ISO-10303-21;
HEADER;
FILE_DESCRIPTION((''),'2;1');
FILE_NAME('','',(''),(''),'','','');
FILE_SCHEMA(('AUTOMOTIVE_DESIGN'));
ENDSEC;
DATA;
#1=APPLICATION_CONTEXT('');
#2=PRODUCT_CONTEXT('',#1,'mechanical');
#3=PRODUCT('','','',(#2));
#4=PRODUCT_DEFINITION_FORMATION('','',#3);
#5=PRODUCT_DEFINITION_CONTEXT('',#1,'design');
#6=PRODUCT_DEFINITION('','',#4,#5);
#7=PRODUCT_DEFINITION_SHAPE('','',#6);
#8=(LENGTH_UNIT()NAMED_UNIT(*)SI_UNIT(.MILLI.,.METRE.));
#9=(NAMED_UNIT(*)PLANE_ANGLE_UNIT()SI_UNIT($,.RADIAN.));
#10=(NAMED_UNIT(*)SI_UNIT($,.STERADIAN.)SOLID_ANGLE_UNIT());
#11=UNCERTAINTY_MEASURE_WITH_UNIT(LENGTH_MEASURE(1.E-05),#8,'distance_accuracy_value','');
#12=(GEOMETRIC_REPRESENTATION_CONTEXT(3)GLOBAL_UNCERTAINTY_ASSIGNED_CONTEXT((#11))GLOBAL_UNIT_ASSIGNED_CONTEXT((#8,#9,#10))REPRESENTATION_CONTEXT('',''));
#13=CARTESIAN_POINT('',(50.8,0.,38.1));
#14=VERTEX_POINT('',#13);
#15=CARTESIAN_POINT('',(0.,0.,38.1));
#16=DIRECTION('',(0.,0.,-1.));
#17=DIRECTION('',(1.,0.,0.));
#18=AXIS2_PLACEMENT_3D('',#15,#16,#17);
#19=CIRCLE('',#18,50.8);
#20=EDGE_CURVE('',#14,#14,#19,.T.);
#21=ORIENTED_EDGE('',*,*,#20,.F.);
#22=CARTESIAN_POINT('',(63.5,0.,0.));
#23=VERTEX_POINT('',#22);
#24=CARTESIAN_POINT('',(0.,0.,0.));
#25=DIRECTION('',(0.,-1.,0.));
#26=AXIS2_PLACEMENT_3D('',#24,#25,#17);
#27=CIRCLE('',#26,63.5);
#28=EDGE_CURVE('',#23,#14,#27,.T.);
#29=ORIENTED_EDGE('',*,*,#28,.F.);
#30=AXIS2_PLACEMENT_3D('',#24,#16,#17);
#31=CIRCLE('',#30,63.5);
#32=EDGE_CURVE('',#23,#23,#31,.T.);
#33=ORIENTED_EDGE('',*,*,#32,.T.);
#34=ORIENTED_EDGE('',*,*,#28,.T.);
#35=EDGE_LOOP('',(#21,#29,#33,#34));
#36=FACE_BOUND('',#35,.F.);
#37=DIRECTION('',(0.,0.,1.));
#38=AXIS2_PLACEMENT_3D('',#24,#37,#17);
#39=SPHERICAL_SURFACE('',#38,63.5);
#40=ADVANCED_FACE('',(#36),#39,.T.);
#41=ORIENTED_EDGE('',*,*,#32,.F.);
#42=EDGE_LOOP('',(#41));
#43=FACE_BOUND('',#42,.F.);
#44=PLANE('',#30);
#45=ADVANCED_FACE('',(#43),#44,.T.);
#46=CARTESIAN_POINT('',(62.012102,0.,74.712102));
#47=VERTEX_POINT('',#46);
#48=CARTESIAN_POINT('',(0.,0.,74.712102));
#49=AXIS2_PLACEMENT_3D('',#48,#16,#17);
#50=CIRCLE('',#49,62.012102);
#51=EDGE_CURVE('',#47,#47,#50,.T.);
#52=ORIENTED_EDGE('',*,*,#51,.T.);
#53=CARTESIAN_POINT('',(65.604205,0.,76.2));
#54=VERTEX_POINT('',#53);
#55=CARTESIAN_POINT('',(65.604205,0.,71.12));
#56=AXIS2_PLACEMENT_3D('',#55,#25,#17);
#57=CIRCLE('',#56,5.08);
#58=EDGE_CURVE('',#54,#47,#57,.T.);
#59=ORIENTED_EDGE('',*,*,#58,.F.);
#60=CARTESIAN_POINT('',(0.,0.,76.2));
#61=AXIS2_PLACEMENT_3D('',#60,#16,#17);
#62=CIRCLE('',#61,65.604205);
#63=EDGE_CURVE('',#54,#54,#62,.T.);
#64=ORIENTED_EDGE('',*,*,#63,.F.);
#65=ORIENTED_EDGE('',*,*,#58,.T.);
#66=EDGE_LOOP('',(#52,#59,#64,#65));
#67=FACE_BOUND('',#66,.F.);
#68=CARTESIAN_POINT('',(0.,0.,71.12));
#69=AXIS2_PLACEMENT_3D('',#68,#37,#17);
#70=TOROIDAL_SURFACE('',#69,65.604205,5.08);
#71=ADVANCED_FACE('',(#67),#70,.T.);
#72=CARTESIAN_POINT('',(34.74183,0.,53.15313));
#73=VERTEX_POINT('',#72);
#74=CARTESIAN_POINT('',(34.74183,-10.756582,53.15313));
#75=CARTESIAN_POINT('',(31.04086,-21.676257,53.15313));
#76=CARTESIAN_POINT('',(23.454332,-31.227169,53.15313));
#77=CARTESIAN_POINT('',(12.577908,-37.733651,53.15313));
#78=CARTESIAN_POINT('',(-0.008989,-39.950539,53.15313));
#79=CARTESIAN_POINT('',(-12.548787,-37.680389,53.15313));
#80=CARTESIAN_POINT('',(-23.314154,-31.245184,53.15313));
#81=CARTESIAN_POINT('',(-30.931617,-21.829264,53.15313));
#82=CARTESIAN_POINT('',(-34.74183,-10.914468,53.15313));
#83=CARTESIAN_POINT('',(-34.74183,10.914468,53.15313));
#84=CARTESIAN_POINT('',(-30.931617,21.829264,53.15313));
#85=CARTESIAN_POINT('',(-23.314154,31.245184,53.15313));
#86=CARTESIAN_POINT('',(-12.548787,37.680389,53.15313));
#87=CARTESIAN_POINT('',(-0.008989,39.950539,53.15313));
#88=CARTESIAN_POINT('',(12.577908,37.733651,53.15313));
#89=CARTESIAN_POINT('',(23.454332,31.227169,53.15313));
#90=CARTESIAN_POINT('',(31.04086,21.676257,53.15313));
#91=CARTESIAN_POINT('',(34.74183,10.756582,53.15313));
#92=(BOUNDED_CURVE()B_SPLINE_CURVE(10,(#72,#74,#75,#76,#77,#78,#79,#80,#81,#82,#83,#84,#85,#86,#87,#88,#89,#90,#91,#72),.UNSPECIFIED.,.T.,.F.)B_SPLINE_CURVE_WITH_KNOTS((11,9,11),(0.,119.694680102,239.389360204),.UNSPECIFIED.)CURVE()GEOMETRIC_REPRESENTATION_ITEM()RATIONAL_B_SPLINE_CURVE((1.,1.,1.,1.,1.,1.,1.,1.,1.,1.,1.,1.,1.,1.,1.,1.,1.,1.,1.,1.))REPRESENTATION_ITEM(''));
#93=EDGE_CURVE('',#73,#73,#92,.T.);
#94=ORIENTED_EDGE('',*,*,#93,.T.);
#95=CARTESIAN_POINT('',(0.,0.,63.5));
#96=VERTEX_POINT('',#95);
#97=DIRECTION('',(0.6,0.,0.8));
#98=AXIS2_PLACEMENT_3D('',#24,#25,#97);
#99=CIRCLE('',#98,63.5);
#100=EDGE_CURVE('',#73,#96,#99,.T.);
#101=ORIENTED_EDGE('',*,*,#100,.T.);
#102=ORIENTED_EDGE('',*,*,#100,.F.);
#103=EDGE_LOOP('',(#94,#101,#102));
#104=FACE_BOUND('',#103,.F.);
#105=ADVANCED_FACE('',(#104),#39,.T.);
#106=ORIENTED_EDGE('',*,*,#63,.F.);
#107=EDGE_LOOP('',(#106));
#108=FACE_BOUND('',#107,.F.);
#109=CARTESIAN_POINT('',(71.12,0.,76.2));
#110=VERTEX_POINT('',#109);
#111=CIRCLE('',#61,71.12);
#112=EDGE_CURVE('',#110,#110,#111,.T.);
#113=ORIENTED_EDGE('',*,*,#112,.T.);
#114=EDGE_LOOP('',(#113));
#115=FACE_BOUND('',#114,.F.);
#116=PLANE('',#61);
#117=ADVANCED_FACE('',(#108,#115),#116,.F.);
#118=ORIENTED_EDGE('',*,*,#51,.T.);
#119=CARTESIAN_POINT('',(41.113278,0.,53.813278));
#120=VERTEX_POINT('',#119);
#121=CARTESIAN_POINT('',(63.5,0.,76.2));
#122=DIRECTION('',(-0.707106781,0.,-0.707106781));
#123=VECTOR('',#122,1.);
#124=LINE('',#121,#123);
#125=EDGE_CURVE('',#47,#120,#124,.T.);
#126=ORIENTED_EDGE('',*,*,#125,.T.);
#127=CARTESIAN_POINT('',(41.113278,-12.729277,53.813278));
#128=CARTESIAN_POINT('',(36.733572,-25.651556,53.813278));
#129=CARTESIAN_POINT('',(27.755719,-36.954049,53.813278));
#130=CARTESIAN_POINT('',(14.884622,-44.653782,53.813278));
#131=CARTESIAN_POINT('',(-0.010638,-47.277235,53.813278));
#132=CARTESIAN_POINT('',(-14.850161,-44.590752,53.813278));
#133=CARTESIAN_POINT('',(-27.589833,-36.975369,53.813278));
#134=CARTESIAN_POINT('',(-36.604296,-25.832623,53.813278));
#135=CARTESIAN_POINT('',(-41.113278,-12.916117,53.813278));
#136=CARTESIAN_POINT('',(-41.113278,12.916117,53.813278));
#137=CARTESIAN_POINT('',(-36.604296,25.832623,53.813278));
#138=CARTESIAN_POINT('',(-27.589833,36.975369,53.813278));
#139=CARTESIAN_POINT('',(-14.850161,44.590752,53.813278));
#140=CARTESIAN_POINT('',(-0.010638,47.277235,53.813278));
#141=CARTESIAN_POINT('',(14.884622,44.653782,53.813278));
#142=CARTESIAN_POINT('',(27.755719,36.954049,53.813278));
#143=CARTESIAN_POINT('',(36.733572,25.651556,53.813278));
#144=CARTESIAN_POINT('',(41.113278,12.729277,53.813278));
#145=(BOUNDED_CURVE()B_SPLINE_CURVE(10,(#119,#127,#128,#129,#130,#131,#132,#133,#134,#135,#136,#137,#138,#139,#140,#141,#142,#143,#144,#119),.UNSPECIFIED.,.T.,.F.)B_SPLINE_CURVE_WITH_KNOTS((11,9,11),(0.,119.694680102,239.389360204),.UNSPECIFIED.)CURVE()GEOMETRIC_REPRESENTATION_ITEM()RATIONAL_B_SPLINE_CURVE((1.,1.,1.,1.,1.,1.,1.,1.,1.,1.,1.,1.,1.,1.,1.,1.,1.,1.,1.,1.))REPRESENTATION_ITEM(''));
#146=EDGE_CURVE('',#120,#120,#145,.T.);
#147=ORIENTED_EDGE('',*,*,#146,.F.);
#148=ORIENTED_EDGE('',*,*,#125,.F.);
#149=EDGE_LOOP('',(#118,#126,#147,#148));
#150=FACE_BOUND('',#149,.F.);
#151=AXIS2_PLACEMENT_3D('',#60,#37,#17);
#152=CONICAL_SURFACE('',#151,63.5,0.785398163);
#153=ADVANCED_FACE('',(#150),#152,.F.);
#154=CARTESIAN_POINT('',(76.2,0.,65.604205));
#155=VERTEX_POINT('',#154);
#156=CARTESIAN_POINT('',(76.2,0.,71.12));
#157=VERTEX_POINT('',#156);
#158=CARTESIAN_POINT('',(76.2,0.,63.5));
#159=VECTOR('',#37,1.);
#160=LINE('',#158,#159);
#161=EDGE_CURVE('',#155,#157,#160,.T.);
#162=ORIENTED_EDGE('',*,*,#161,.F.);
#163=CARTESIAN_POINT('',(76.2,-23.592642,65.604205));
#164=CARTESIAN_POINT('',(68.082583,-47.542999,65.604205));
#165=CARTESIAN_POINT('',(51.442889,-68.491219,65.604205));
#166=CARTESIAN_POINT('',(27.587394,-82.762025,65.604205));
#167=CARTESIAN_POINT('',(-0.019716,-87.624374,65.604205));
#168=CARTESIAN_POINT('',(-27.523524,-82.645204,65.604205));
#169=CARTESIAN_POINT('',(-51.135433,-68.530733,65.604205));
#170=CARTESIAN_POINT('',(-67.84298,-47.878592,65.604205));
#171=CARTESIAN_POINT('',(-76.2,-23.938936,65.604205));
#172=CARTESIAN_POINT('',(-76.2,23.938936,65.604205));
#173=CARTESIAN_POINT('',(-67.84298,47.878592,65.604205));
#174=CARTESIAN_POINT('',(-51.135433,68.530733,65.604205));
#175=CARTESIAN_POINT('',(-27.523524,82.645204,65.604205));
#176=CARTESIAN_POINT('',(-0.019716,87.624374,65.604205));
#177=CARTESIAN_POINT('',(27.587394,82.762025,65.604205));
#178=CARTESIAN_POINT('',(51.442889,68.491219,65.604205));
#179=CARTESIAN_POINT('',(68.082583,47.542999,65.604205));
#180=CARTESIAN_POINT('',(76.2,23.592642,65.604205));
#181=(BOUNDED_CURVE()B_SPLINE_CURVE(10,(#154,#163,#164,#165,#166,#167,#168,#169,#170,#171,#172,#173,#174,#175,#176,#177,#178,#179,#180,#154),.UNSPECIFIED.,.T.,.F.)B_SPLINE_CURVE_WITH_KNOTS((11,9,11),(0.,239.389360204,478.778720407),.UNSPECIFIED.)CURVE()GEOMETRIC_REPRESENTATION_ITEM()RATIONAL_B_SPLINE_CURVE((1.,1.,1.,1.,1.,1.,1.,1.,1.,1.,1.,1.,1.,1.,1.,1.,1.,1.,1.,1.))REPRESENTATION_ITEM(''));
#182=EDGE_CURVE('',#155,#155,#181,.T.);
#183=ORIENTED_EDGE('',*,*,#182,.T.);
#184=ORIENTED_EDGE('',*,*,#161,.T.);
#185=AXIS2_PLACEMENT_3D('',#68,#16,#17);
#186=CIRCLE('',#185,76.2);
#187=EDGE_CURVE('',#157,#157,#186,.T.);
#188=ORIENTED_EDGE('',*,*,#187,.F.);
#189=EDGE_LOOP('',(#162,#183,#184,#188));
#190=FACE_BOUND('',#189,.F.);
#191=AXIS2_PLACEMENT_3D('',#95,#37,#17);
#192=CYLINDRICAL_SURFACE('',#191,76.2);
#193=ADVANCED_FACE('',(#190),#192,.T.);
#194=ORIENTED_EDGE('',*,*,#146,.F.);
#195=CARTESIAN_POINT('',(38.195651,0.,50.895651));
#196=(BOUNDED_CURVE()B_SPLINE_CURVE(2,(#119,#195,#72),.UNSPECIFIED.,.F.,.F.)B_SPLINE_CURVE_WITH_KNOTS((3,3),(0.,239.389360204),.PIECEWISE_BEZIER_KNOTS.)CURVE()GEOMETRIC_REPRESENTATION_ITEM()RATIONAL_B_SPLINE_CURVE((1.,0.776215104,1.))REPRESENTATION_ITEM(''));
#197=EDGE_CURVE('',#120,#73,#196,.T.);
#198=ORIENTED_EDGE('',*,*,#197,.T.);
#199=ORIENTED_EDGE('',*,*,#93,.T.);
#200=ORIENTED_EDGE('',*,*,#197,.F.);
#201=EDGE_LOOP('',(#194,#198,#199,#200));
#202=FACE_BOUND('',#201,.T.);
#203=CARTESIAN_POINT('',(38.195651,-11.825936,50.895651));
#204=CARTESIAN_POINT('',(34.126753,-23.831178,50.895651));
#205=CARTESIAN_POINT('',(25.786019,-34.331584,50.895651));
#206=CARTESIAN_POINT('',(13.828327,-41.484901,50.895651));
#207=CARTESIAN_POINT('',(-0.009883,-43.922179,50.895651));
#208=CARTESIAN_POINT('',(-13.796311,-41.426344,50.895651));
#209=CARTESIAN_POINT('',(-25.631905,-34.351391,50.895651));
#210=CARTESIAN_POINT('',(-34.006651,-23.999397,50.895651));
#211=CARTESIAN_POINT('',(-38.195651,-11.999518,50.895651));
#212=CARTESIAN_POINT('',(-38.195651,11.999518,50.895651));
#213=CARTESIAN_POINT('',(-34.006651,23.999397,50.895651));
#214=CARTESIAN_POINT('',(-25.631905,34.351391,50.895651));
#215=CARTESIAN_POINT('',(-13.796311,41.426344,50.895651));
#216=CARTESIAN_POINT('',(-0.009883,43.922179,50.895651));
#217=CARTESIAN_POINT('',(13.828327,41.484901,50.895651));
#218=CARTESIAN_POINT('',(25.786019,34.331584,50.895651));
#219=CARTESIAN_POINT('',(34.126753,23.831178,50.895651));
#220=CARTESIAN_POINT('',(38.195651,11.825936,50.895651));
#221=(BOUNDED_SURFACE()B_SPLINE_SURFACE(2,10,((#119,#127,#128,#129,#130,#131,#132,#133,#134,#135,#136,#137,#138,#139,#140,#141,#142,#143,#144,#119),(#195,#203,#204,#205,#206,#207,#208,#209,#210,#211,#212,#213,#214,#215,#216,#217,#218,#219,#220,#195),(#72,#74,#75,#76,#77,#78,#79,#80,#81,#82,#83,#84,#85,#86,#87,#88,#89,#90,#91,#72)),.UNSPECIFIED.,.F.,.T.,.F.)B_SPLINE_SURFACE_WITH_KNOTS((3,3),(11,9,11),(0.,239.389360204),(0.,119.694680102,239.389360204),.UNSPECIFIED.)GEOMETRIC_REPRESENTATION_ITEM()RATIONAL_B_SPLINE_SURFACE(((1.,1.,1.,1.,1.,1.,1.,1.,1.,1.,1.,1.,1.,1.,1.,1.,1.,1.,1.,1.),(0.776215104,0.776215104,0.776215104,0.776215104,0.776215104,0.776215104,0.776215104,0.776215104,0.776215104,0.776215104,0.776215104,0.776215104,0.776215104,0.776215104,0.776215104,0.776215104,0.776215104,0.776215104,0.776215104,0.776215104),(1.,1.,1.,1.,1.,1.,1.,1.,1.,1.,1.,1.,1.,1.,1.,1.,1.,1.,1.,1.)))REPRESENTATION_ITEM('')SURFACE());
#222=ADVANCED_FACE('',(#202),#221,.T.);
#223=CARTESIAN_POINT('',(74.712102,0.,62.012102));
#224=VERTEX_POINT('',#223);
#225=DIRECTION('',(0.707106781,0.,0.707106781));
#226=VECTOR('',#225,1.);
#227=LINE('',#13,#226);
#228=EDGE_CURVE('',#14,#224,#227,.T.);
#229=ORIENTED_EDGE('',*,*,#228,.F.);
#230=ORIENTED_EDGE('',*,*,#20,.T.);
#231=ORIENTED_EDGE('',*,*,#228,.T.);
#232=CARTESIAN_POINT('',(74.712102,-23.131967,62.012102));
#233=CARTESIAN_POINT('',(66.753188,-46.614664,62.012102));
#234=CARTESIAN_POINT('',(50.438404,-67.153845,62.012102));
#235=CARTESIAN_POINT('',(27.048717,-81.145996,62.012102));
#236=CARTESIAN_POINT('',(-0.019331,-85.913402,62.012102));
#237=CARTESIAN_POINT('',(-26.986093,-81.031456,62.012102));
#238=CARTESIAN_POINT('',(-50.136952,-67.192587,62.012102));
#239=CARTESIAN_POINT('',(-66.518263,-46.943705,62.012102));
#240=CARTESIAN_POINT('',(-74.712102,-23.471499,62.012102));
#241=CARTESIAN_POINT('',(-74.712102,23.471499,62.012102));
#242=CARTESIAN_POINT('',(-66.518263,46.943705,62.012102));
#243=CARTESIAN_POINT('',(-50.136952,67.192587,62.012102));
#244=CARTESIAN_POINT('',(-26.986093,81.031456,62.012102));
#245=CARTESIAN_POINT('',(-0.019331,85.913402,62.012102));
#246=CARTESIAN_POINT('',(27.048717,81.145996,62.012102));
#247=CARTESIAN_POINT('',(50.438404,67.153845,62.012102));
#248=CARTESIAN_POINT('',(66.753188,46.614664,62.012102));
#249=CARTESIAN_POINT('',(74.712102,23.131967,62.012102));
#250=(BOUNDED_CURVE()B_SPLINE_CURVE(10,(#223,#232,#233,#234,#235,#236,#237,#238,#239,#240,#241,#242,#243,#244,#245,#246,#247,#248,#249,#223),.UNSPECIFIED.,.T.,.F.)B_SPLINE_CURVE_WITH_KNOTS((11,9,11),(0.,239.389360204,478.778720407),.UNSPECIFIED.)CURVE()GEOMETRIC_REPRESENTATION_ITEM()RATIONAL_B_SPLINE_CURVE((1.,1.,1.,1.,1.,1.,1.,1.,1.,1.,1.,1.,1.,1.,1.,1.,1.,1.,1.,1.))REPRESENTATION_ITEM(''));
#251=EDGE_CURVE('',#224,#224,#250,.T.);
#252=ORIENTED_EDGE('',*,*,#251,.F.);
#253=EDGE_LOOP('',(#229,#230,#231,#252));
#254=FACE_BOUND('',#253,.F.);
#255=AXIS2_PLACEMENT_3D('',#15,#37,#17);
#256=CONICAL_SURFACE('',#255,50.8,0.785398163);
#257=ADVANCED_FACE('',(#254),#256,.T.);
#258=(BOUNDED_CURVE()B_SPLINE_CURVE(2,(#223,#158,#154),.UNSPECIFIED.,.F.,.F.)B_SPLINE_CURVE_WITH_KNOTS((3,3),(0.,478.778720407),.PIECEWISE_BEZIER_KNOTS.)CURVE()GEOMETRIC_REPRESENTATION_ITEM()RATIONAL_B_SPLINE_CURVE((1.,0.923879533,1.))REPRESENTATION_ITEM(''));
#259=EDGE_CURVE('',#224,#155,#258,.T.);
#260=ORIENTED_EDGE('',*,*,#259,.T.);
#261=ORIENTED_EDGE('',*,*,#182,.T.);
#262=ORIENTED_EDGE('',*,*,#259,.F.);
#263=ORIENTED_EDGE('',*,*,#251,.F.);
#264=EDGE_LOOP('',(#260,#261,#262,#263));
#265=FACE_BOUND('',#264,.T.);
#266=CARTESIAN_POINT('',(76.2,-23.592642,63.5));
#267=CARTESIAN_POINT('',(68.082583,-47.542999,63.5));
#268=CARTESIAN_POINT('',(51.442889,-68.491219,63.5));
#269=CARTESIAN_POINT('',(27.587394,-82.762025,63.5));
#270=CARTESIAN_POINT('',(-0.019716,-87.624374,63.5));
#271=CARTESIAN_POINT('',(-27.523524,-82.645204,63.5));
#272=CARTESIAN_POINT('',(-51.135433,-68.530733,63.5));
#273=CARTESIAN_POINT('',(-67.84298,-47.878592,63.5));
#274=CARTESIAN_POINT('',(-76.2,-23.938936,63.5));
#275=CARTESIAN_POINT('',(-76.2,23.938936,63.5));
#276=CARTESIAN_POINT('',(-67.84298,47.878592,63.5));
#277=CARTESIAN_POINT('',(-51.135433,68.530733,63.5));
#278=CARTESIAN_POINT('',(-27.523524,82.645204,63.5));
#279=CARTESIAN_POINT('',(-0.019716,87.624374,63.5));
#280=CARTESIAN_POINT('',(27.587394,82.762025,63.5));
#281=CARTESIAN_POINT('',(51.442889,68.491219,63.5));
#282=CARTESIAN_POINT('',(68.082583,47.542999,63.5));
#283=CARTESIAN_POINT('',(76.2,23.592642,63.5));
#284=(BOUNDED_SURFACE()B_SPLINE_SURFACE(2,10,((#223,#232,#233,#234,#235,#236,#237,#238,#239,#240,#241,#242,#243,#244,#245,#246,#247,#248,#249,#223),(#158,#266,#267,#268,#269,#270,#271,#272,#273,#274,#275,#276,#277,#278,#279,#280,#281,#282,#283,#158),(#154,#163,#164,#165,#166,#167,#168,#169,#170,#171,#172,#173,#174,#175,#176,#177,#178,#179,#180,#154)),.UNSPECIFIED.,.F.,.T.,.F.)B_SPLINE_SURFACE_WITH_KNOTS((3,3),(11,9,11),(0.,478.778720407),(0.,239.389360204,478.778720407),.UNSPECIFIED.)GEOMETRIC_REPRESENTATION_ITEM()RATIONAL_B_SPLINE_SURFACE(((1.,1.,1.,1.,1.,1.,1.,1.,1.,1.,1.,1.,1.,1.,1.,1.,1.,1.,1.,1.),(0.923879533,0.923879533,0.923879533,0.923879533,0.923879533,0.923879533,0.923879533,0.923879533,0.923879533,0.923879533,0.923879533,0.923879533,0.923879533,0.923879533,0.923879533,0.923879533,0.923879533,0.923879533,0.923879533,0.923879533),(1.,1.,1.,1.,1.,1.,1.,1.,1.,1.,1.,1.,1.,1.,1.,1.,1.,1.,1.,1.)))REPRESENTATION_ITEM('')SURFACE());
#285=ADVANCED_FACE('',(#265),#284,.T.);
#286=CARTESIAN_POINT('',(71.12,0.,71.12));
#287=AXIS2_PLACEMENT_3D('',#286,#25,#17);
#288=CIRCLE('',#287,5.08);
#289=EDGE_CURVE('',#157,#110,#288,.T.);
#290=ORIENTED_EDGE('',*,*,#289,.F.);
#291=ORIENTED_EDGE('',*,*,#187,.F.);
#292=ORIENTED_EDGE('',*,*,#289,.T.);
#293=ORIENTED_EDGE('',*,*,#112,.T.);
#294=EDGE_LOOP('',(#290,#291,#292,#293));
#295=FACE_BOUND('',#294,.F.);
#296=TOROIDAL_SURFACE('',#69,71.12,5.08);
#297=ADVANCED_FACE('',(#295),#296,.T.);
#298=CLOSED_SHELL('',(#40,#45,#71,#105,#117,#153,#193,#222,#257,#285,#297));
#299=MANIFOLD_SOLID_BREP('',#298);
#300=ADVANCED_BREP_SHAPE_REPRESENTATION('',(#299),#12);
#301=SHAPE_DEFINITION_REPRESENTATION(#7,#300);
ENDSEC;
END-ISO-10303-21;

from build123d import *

# Parameters (mm, degrees)
F2_R = 5.08


with BuildPart() as f1:
    # F0 (on Front) → F1 (revolve)
    with BuildSketch(Plane.XZ):
        with BuildLine():
            Line((0, 0), (63.5, 0))
            ThreePointArc((63.5, 0), (60.2413894262, 20.0804631421), (50.8, 38.1))
            ThreePointArc((50.8, 38.1), (44.9012806053, 44.9012806053), (38.1, 50.8))
            ThreePointArc((38.1, 50.8), (20.0804631421, 60.2413894262), (0, 63.5))
            Line((0, 63.5), (0, 0))
        make_face()
        with BuildLine():
            ThreePointArc((38.1, 50.8), (44.9012806053, 44.9012806053), (50.8, 38.1))
            Line((50.8, 38.1), (76.2, 63.5))
            Line((76.2, 63.5), (76.2, 76.2))
            Line((76.2, 76.2), (63.5, 76.2))
            Line((63.5, 76.2), (38.1, 50.8))
        make_face()
    revolve(axis=Axis((0, 0, -31.75), (0, 0, -1)))

    # F2
    f2_edges = [f1.edges().sort_by_distance(p)[0] for p in [
        (-63.5, 0, 76.2),
        (-76.2, 0, 76.2),
        (-76.2, 0, 63.5),
        (-38.1, 0, 50.8),
    ]]
    fillet(f2_edges, radius=F2_R)


solid = f1.part
